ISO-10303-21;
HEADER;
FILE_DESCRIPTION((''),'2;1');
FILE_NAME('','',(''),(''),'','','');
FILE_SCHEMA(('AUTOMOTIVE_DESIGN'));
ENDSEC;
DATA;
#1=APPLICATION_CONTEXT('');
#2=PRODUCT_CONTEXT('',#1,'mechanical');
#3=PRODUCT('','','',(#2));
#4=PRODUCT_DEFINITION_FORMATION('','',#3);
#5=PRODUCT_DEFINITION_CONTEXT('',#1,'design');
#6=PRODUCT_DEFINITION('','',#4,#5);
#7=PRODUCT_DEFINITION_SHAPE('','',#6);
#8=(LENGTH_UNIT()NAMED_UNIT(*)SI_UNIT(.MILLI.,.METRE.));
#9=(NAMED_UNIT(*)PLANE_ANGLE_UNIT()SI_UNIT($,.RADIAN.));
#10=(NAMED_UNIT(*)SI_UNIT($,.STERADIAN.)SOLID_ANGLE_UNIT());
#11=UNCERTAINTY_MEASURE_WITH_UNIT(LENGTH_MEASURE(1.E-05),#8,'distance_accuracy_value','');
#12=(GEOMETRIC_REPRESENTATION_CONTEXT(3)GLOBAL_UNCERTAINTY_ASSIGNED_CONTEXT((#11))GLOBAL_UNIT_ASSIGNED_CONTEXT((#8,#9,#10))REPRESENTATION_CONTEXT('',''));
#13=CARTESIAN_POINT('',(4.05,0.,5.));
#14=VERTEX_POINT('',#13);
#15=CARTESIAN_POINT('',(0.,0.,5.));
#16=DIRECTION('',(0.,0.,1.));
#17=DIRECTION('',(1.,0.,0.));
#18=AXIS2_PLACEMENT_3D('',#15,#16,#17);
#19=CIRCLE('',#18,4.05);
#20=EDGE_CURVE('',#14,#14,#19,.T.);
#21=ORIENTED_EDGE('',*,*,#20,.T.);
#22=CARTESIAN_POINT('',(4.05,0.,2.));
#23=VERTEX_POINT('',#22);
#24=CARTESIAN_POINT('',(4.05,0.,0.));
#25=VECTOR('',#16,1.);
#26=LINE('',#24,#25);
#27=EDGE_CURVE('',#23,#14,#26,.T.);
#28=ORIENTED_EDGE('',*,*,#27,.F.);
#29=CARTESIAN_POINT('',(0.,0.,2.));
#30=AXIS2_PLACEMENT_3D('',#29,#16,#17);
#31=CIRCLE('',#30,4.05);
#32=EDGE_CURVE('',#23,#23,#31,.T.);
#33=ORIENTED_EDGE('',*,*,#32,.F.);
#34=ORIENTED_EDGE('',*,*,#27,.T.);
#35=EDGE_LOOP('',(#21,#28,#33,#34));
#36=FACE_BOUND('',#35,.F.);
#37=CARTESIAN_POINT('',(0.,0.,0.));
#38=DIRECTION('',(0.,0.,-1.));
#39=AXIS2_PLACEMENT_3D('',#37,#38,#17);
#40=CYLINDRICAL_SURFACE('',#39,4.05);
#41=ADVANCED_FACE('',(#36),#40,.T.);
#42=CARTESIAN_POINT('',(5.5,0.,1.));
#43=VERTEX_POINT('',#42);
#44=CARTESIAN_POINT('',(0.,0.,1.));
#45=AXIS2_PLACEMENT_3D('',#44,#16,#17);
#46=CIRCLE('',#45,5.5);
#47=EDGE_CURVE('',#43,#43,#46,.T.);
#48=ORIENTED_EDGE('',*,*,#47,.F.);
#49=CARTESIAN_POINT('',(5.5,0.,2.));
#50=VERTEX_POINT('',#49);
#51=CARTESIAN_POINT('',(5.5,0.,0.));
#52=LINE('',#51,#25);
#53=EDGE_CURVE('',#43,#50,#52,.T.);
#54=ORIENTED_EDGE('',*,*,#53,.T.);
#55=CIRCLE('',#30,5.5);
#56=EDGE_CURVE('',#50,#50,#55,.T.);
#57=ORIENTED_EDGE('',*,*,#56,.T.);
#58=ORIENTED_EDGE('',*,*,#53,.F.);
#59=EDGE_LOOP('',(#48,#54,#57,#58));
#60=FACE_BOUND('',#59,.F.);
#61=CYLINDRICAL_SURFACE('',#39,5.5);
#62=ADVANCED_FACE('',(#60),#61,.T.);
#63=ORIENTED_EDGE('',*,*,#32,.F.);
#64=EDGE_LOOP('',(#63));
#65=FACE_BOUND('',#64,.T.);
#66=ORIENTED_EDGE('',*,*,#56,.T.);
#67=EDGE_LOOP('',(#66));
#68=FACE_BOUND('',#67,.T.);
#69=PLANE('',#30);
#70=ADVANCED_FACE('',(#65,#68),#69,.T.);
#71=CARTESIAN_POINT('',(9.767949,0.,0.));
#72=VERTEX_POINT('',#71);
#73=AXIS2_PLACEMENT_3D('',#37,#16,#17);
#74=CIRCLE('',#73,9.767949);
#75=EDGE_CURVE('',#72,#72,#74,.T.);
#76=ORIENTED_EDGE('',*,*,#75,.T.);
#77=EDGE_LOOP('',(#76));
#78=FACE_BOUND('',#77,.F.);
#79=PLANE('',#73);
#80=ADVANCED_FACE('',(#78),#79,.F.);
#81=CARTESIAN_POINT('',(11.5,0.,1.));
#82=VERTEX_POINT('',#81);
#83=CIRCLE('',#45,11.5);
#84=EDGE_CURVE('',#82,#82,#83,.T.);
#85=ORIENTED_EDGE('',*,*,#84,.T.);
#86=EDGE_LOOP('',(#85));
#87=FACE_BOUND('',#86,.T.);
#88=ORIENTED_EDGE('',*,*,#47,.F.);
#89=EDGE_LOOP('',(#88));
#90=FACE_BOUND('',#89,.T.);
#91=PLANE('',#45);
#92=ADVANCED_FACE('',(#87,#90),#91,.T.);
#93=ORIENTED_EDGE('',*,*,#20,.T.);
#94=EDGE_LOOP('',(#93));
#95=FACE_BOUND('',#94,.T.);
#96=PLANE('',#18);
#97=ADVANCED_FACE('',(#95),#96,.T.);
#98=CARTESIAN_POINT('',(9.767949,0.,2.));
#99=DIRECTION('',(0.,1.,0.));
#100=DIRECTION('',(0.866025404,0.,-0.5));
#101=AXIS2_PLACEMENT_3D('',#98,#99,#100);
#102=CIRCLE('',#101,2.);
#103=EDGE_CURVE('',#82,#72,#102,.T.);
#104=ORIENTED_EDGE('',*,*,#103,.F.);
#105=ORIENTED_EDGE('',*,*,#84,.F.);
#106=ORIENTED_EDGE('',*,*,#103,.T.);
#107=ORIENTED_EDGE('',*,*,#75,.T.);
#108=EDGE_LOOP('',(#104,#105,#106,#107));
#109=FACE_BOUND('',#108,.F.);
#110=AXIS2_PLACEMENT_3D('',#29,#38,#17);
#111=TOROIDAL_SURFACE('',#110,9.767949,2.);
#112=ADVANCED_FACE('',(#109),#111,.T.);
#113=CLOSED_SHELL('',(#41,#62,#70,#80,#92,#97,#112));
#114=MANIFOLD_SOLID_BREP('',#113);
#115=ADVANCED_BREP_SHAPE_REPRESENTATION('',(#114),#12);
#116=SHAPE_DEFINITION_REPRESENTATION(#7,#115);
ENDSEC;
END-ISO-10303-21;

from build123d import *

# Parameters (mm, degrees)
F0_R     = 11.5
F0_R_2   = 5.5
F1_DEPTH = 1
F0_R_3   = 4.05
F2_DEPTH = 2
F0_R_4   = 2
F3_DEPTH = 5


# Not quite as in the source:
# - a fillet or chamfer that OpenCascade refuses, or shapes differently, is made with other operations: its cross-section is extruded or revolved along the edge and cut away or added


with BuildPart() as f1:
    # F0 (on Top) → F1 (new body)
    with BuildSketch(Plane.XY):
        Circle(F0_R)
        Circle(F0_R_2, mode=Mode.SUBTRACT)
    extrude(amount=F1_DEPTH)

    # F0 (on Top) → F2 (join)
    with BuildSketch(Plane.XY):
        Circle(F0_R_2)
        Circle(F0_R_3, mode=Mode.SUBTRACT)
    extrude(amount=F2_DEPTH)

    # F0 (on Top) → F3 (join)
    with BuildSketch(Plane.XY):
        Circle(F0_R_3)
        Circle(F0_R_4, mode=Mode.SUBTRACT)
        Circle(F0_R_4)
    extrude(amount=F3_DEPTH)

    # F4: fillet of radius 2 on 1 edges, made by hand

    # F4_s1 → F4_t2 (revolve, cut)
    with BuildSketch(Plane.XZ):
        with BuildLine():
            ThreePointArc((11.5, 1), (10.7679491924, 0.2679491924), (9.7679491924, 0))
            Line((9.7679491924, 0), (11.5, 0))
            Line((11.5, 0), (11.5, 1))
        make_face()
    revolve(axis=Axis((0, 0, 0), (0, 0, 1)), mode=Mode.SUBTRACT)


solid = f1.part
